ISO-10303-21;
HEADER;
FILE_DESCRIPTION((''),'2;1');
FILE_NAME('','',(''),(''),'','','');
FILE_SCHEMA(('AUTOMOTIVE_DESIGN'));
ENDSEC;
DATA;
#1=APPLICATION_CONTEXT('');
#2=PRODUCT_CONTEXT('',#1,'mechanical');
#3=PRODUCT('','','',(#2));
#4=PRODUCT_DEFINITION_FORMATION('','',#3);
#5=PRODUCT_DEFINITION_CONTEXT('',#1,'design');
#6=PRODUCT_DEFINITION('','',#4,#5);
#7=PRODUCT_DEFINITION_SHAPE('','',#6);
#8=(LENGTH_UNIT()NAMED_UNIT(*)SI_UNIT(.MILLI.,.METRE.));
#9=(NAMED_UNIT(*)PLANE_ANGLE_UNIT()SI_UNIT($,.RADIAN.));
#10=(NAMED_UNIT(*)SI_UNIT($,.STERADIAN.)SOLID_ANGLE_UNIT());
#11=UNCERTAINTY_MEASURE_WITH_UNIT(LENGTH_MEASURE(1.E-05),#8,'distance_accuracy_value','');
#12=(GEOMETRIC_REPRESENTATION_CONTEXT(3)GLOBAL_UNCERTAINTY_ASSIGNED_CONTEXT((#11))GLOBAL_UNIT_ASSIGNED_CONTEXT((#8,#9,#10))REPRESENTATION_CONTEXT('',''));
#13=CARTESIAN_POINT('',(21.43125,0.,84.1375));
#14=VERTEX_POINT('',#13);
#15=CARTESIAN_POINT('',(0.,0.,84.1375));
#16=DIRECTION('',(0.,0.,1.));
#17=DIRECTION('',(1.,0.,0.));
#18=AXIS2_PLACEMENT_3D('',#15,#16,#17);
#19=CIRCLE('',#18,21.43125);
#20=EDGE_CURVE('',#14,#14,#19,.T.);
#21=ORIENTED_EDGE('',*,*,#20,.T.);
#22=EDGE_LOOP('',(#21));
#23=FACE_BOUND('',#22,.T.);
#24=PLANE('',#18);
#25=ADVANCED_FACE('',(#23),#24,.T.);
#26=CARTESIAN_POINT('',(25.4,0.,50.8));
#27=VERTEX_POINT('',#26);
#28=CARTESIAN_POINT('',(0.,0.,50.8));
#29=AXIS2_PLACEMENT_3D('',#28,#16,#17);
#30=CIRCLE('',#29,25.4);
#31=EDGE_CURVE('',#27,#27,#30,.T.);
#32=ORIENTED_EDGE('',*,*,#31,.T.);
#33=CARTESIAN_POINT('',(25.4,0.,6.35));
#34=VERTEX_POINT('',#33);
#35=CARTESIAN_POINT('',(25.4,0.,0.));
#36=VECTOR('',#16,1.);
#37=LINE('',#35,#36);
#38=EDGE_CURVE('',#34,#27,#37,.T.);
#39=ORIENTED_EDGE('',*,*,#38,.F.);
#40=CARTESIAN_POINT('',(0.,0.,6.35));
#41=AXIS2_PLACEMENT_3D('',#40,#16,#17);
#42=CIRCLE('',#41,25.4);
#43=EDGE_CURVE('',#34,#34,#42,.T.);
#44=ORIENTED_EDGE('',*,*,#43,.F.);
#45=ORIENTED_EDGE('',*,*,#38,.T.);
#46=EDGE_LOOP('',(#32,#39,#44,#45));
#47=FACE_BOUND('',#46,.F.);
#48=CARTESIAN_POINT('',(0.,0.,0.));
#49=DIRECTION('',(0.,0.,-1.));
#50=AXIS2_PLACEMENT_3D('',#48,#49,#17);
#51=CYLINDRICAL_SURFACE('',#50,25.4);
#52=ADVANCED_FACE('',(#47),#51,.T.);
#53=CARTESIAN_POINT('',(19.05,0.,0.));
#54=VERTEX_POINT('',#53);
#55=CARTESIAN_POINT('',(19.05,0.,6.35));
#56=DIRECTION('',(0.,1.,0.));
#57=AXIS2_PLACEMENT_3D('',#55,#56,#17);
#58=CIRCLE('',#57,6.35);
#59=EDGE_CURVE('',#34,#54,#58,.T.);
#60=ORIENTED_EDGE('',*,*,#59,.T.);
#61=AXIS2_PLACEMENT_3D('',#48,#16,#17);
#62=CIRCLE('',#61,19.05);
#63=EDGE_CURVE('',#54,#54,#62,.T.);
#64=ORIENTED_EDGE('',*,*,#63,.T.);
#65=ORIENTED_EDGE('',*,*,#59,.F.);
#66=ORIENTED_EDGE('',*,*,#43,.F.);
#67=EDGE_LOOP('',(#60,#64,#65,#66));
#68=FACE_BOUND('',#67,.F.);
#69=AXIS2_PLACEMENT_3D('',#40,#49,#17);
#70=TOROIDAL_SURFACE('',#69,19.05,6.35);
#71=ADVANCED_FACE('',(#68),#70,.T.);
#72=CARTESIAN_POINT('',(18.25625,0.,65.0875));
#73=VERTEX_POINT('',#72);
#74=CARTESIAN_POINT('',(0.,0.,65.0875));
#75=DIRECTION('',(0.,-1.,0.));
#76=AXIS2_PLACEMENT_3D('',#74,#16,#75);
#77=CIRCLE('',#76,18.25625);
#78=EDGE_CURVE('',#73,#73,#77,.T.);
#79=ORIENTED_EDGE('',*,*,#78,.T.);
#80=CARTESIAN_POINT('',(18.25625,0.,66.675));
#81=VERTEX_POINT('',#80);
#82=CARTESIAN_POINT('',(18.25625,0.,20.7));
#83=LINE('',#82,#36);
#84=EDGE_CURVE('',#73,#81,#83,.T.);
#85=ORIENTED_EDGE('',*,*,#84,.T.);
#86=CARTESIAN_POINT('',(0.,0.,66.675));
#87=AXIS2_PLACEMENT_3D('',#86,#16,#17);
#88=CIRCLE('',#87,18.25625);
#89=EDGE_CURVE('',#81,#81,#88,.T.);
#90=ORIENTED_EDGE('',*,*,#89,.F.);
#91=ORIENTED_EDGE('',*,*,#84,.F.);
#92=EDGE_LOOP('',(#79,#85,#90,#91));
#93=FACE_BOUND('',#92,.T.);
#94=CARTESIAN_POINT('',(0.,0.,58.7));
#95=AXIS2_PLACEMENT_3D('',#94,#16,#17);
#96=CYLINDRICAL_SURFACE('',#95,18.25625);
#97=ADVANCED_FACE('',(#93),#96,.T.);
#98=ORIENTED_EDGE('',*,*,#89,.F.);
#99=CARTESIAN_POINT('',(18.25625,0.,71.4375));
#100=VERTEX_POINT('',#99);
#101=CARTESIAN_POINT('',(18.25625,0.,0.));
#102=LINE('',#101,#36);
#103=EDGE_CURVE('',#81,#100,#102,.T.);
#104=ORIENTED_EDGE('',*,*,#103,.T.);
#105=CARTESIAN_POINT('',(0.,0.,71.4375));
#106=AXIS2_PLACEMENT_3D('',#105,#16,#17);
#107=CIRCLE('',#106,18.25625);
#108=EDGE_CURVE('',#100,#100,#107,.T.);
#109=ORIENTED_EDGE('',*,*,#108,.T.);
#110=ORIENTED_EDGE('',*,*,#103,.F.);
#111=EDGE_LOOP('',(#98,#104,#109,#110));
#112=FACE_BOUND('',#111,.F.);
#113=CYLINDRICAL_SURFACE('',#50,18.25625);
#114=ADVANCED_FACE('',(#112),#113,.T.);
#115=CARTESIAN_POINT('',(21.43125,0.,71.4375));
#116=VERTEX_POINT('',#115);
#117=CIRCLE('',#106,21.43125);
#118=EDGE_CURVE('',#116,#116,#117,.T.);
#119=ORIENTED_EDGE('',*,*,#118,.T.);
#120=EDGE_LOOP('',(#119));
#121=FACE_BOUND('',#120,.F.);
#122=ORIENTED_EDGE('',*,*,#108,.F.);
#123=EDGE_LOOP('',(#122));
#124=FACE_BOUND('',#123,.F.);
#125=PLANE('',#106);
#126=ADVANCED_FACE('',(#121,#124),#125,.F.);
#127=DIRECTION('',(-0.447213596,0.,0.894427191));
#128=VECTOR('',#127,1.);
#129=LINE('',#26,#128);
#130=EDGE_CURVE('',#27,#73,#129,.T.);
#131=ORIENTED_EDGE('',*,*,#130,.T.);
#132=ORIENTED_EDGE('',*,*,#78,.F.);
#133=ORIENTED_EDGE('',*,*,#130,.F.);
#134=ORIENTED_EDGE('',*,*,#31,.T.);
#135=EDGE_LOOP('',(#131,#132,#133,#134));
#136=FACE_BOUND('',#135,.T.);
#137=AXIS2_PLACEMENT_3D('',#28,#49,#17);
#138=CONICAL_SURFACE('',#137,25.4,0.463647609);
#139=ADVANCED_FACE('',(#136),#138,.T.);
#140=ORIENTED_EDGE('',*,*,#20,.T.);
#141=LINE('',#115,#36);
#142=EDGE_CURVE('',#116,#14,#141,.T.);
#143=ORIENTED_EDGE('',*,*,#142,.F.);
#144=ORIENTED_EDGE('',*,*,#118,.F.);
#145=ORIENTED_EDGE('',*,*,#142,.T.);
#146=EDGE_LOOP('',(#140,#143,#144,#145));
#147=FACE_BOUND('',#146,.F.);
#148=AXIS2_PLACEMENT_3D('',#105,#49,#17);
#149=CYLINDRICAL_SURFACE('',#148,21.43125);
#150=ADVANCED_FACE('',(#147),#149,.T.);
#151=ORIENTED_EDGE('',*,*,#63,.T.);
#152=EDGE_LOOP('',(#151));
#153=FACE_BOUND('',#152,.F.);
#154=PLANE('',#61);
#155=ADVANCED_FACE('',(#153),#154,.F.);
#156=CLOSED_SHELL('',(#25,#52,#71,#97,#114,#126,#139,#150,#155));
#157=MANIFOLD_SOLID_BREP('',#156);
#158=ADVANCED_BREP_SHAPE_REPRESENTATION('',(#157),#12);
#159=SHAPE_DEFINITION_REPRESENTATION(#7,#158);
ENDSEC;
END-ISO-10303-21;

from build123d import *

# Parameters (mm, degrees)
F0_R        = 25.4
F0_R_2      = 21.43125
F0_R_3      = 18.25625
F1_DEPTH    = 66.675
F2_DEPTH    = 84.1375
F3_R        = 6.35
F4_S5_R     = 18.25625
F4_T6_DEPTH = 38
F5_START    = 71.4375
F5_DEPTH    = 12.7


# Not quite as in the source:
# - a fillet or chamfer that OpenCascade refuses, or shapes differently, is made with other operations: its cross-section is extruded or revolved along the edge and cut away or added


with BuildPart() as f1:
    # F0 (on Top) → F1 (new body)
    with BuildSketch(Plane.XY):
        Circle(F0_R)
        Circle(F0_R_2, mode=Mode.SUBTRACT)
        Circle(F0_R_2)
        Circle(F0_R_3, mode=Mode.SUBTRACT)
    extrude(amount=F1_DEPTH)

    # F0 (on Top) → F2 (join)
    with BuildSketch(Plane.XY):
        Circle(F0_R_3)
    extrude(amount=F2_DEPTH)

    # F3
    f3_edges = [f1.edges().sort_by_distance(p)[0] for p in [
        (-25.4, 0, 0),
    ]]
    fillet(f3_edges, radius=F3_R)

    # F4: chamfer of 7.9375 x 15.875 on 1 edges, made by hand


with BuildPart() as f4_tool2:
    # F4_s3 → F4_t4 (revolve)
    with BuildSketch(Plane.XZ):
        Polygon((25.4, 50.8), (17.4625, 66.675), (25.4, 66.675), align=None)
    revolve(axis=Axis((0, 0, 66.675), (0, 0, 1)))

    # F4_s5 → F4_t6 (cut, symmetric)
    with BuildSketch(Plane.XY.offset(58.7)):
        Circle(F4_S5_R)
    extrude(amount=F4_T6_DEPTH, both=True, mode=Mode.SUBTRACT)


with BuildPart() as f1_1:
    add(f1.part)

    # F4_t1: cut F4_tool2
    add(f4_tool2.part, mode=Mode.SUBTRACT)

    # F0 (on Top) → F5 (join)
    with BuildSketch(Plane.XY.offset(F5_START)):
        Circle(F0_R_2)
        Circle(F0_R_3, mode=Mode.SUBTRACT)
    extrude(amount=F5_DEPTH)


solid = f1_1.part
